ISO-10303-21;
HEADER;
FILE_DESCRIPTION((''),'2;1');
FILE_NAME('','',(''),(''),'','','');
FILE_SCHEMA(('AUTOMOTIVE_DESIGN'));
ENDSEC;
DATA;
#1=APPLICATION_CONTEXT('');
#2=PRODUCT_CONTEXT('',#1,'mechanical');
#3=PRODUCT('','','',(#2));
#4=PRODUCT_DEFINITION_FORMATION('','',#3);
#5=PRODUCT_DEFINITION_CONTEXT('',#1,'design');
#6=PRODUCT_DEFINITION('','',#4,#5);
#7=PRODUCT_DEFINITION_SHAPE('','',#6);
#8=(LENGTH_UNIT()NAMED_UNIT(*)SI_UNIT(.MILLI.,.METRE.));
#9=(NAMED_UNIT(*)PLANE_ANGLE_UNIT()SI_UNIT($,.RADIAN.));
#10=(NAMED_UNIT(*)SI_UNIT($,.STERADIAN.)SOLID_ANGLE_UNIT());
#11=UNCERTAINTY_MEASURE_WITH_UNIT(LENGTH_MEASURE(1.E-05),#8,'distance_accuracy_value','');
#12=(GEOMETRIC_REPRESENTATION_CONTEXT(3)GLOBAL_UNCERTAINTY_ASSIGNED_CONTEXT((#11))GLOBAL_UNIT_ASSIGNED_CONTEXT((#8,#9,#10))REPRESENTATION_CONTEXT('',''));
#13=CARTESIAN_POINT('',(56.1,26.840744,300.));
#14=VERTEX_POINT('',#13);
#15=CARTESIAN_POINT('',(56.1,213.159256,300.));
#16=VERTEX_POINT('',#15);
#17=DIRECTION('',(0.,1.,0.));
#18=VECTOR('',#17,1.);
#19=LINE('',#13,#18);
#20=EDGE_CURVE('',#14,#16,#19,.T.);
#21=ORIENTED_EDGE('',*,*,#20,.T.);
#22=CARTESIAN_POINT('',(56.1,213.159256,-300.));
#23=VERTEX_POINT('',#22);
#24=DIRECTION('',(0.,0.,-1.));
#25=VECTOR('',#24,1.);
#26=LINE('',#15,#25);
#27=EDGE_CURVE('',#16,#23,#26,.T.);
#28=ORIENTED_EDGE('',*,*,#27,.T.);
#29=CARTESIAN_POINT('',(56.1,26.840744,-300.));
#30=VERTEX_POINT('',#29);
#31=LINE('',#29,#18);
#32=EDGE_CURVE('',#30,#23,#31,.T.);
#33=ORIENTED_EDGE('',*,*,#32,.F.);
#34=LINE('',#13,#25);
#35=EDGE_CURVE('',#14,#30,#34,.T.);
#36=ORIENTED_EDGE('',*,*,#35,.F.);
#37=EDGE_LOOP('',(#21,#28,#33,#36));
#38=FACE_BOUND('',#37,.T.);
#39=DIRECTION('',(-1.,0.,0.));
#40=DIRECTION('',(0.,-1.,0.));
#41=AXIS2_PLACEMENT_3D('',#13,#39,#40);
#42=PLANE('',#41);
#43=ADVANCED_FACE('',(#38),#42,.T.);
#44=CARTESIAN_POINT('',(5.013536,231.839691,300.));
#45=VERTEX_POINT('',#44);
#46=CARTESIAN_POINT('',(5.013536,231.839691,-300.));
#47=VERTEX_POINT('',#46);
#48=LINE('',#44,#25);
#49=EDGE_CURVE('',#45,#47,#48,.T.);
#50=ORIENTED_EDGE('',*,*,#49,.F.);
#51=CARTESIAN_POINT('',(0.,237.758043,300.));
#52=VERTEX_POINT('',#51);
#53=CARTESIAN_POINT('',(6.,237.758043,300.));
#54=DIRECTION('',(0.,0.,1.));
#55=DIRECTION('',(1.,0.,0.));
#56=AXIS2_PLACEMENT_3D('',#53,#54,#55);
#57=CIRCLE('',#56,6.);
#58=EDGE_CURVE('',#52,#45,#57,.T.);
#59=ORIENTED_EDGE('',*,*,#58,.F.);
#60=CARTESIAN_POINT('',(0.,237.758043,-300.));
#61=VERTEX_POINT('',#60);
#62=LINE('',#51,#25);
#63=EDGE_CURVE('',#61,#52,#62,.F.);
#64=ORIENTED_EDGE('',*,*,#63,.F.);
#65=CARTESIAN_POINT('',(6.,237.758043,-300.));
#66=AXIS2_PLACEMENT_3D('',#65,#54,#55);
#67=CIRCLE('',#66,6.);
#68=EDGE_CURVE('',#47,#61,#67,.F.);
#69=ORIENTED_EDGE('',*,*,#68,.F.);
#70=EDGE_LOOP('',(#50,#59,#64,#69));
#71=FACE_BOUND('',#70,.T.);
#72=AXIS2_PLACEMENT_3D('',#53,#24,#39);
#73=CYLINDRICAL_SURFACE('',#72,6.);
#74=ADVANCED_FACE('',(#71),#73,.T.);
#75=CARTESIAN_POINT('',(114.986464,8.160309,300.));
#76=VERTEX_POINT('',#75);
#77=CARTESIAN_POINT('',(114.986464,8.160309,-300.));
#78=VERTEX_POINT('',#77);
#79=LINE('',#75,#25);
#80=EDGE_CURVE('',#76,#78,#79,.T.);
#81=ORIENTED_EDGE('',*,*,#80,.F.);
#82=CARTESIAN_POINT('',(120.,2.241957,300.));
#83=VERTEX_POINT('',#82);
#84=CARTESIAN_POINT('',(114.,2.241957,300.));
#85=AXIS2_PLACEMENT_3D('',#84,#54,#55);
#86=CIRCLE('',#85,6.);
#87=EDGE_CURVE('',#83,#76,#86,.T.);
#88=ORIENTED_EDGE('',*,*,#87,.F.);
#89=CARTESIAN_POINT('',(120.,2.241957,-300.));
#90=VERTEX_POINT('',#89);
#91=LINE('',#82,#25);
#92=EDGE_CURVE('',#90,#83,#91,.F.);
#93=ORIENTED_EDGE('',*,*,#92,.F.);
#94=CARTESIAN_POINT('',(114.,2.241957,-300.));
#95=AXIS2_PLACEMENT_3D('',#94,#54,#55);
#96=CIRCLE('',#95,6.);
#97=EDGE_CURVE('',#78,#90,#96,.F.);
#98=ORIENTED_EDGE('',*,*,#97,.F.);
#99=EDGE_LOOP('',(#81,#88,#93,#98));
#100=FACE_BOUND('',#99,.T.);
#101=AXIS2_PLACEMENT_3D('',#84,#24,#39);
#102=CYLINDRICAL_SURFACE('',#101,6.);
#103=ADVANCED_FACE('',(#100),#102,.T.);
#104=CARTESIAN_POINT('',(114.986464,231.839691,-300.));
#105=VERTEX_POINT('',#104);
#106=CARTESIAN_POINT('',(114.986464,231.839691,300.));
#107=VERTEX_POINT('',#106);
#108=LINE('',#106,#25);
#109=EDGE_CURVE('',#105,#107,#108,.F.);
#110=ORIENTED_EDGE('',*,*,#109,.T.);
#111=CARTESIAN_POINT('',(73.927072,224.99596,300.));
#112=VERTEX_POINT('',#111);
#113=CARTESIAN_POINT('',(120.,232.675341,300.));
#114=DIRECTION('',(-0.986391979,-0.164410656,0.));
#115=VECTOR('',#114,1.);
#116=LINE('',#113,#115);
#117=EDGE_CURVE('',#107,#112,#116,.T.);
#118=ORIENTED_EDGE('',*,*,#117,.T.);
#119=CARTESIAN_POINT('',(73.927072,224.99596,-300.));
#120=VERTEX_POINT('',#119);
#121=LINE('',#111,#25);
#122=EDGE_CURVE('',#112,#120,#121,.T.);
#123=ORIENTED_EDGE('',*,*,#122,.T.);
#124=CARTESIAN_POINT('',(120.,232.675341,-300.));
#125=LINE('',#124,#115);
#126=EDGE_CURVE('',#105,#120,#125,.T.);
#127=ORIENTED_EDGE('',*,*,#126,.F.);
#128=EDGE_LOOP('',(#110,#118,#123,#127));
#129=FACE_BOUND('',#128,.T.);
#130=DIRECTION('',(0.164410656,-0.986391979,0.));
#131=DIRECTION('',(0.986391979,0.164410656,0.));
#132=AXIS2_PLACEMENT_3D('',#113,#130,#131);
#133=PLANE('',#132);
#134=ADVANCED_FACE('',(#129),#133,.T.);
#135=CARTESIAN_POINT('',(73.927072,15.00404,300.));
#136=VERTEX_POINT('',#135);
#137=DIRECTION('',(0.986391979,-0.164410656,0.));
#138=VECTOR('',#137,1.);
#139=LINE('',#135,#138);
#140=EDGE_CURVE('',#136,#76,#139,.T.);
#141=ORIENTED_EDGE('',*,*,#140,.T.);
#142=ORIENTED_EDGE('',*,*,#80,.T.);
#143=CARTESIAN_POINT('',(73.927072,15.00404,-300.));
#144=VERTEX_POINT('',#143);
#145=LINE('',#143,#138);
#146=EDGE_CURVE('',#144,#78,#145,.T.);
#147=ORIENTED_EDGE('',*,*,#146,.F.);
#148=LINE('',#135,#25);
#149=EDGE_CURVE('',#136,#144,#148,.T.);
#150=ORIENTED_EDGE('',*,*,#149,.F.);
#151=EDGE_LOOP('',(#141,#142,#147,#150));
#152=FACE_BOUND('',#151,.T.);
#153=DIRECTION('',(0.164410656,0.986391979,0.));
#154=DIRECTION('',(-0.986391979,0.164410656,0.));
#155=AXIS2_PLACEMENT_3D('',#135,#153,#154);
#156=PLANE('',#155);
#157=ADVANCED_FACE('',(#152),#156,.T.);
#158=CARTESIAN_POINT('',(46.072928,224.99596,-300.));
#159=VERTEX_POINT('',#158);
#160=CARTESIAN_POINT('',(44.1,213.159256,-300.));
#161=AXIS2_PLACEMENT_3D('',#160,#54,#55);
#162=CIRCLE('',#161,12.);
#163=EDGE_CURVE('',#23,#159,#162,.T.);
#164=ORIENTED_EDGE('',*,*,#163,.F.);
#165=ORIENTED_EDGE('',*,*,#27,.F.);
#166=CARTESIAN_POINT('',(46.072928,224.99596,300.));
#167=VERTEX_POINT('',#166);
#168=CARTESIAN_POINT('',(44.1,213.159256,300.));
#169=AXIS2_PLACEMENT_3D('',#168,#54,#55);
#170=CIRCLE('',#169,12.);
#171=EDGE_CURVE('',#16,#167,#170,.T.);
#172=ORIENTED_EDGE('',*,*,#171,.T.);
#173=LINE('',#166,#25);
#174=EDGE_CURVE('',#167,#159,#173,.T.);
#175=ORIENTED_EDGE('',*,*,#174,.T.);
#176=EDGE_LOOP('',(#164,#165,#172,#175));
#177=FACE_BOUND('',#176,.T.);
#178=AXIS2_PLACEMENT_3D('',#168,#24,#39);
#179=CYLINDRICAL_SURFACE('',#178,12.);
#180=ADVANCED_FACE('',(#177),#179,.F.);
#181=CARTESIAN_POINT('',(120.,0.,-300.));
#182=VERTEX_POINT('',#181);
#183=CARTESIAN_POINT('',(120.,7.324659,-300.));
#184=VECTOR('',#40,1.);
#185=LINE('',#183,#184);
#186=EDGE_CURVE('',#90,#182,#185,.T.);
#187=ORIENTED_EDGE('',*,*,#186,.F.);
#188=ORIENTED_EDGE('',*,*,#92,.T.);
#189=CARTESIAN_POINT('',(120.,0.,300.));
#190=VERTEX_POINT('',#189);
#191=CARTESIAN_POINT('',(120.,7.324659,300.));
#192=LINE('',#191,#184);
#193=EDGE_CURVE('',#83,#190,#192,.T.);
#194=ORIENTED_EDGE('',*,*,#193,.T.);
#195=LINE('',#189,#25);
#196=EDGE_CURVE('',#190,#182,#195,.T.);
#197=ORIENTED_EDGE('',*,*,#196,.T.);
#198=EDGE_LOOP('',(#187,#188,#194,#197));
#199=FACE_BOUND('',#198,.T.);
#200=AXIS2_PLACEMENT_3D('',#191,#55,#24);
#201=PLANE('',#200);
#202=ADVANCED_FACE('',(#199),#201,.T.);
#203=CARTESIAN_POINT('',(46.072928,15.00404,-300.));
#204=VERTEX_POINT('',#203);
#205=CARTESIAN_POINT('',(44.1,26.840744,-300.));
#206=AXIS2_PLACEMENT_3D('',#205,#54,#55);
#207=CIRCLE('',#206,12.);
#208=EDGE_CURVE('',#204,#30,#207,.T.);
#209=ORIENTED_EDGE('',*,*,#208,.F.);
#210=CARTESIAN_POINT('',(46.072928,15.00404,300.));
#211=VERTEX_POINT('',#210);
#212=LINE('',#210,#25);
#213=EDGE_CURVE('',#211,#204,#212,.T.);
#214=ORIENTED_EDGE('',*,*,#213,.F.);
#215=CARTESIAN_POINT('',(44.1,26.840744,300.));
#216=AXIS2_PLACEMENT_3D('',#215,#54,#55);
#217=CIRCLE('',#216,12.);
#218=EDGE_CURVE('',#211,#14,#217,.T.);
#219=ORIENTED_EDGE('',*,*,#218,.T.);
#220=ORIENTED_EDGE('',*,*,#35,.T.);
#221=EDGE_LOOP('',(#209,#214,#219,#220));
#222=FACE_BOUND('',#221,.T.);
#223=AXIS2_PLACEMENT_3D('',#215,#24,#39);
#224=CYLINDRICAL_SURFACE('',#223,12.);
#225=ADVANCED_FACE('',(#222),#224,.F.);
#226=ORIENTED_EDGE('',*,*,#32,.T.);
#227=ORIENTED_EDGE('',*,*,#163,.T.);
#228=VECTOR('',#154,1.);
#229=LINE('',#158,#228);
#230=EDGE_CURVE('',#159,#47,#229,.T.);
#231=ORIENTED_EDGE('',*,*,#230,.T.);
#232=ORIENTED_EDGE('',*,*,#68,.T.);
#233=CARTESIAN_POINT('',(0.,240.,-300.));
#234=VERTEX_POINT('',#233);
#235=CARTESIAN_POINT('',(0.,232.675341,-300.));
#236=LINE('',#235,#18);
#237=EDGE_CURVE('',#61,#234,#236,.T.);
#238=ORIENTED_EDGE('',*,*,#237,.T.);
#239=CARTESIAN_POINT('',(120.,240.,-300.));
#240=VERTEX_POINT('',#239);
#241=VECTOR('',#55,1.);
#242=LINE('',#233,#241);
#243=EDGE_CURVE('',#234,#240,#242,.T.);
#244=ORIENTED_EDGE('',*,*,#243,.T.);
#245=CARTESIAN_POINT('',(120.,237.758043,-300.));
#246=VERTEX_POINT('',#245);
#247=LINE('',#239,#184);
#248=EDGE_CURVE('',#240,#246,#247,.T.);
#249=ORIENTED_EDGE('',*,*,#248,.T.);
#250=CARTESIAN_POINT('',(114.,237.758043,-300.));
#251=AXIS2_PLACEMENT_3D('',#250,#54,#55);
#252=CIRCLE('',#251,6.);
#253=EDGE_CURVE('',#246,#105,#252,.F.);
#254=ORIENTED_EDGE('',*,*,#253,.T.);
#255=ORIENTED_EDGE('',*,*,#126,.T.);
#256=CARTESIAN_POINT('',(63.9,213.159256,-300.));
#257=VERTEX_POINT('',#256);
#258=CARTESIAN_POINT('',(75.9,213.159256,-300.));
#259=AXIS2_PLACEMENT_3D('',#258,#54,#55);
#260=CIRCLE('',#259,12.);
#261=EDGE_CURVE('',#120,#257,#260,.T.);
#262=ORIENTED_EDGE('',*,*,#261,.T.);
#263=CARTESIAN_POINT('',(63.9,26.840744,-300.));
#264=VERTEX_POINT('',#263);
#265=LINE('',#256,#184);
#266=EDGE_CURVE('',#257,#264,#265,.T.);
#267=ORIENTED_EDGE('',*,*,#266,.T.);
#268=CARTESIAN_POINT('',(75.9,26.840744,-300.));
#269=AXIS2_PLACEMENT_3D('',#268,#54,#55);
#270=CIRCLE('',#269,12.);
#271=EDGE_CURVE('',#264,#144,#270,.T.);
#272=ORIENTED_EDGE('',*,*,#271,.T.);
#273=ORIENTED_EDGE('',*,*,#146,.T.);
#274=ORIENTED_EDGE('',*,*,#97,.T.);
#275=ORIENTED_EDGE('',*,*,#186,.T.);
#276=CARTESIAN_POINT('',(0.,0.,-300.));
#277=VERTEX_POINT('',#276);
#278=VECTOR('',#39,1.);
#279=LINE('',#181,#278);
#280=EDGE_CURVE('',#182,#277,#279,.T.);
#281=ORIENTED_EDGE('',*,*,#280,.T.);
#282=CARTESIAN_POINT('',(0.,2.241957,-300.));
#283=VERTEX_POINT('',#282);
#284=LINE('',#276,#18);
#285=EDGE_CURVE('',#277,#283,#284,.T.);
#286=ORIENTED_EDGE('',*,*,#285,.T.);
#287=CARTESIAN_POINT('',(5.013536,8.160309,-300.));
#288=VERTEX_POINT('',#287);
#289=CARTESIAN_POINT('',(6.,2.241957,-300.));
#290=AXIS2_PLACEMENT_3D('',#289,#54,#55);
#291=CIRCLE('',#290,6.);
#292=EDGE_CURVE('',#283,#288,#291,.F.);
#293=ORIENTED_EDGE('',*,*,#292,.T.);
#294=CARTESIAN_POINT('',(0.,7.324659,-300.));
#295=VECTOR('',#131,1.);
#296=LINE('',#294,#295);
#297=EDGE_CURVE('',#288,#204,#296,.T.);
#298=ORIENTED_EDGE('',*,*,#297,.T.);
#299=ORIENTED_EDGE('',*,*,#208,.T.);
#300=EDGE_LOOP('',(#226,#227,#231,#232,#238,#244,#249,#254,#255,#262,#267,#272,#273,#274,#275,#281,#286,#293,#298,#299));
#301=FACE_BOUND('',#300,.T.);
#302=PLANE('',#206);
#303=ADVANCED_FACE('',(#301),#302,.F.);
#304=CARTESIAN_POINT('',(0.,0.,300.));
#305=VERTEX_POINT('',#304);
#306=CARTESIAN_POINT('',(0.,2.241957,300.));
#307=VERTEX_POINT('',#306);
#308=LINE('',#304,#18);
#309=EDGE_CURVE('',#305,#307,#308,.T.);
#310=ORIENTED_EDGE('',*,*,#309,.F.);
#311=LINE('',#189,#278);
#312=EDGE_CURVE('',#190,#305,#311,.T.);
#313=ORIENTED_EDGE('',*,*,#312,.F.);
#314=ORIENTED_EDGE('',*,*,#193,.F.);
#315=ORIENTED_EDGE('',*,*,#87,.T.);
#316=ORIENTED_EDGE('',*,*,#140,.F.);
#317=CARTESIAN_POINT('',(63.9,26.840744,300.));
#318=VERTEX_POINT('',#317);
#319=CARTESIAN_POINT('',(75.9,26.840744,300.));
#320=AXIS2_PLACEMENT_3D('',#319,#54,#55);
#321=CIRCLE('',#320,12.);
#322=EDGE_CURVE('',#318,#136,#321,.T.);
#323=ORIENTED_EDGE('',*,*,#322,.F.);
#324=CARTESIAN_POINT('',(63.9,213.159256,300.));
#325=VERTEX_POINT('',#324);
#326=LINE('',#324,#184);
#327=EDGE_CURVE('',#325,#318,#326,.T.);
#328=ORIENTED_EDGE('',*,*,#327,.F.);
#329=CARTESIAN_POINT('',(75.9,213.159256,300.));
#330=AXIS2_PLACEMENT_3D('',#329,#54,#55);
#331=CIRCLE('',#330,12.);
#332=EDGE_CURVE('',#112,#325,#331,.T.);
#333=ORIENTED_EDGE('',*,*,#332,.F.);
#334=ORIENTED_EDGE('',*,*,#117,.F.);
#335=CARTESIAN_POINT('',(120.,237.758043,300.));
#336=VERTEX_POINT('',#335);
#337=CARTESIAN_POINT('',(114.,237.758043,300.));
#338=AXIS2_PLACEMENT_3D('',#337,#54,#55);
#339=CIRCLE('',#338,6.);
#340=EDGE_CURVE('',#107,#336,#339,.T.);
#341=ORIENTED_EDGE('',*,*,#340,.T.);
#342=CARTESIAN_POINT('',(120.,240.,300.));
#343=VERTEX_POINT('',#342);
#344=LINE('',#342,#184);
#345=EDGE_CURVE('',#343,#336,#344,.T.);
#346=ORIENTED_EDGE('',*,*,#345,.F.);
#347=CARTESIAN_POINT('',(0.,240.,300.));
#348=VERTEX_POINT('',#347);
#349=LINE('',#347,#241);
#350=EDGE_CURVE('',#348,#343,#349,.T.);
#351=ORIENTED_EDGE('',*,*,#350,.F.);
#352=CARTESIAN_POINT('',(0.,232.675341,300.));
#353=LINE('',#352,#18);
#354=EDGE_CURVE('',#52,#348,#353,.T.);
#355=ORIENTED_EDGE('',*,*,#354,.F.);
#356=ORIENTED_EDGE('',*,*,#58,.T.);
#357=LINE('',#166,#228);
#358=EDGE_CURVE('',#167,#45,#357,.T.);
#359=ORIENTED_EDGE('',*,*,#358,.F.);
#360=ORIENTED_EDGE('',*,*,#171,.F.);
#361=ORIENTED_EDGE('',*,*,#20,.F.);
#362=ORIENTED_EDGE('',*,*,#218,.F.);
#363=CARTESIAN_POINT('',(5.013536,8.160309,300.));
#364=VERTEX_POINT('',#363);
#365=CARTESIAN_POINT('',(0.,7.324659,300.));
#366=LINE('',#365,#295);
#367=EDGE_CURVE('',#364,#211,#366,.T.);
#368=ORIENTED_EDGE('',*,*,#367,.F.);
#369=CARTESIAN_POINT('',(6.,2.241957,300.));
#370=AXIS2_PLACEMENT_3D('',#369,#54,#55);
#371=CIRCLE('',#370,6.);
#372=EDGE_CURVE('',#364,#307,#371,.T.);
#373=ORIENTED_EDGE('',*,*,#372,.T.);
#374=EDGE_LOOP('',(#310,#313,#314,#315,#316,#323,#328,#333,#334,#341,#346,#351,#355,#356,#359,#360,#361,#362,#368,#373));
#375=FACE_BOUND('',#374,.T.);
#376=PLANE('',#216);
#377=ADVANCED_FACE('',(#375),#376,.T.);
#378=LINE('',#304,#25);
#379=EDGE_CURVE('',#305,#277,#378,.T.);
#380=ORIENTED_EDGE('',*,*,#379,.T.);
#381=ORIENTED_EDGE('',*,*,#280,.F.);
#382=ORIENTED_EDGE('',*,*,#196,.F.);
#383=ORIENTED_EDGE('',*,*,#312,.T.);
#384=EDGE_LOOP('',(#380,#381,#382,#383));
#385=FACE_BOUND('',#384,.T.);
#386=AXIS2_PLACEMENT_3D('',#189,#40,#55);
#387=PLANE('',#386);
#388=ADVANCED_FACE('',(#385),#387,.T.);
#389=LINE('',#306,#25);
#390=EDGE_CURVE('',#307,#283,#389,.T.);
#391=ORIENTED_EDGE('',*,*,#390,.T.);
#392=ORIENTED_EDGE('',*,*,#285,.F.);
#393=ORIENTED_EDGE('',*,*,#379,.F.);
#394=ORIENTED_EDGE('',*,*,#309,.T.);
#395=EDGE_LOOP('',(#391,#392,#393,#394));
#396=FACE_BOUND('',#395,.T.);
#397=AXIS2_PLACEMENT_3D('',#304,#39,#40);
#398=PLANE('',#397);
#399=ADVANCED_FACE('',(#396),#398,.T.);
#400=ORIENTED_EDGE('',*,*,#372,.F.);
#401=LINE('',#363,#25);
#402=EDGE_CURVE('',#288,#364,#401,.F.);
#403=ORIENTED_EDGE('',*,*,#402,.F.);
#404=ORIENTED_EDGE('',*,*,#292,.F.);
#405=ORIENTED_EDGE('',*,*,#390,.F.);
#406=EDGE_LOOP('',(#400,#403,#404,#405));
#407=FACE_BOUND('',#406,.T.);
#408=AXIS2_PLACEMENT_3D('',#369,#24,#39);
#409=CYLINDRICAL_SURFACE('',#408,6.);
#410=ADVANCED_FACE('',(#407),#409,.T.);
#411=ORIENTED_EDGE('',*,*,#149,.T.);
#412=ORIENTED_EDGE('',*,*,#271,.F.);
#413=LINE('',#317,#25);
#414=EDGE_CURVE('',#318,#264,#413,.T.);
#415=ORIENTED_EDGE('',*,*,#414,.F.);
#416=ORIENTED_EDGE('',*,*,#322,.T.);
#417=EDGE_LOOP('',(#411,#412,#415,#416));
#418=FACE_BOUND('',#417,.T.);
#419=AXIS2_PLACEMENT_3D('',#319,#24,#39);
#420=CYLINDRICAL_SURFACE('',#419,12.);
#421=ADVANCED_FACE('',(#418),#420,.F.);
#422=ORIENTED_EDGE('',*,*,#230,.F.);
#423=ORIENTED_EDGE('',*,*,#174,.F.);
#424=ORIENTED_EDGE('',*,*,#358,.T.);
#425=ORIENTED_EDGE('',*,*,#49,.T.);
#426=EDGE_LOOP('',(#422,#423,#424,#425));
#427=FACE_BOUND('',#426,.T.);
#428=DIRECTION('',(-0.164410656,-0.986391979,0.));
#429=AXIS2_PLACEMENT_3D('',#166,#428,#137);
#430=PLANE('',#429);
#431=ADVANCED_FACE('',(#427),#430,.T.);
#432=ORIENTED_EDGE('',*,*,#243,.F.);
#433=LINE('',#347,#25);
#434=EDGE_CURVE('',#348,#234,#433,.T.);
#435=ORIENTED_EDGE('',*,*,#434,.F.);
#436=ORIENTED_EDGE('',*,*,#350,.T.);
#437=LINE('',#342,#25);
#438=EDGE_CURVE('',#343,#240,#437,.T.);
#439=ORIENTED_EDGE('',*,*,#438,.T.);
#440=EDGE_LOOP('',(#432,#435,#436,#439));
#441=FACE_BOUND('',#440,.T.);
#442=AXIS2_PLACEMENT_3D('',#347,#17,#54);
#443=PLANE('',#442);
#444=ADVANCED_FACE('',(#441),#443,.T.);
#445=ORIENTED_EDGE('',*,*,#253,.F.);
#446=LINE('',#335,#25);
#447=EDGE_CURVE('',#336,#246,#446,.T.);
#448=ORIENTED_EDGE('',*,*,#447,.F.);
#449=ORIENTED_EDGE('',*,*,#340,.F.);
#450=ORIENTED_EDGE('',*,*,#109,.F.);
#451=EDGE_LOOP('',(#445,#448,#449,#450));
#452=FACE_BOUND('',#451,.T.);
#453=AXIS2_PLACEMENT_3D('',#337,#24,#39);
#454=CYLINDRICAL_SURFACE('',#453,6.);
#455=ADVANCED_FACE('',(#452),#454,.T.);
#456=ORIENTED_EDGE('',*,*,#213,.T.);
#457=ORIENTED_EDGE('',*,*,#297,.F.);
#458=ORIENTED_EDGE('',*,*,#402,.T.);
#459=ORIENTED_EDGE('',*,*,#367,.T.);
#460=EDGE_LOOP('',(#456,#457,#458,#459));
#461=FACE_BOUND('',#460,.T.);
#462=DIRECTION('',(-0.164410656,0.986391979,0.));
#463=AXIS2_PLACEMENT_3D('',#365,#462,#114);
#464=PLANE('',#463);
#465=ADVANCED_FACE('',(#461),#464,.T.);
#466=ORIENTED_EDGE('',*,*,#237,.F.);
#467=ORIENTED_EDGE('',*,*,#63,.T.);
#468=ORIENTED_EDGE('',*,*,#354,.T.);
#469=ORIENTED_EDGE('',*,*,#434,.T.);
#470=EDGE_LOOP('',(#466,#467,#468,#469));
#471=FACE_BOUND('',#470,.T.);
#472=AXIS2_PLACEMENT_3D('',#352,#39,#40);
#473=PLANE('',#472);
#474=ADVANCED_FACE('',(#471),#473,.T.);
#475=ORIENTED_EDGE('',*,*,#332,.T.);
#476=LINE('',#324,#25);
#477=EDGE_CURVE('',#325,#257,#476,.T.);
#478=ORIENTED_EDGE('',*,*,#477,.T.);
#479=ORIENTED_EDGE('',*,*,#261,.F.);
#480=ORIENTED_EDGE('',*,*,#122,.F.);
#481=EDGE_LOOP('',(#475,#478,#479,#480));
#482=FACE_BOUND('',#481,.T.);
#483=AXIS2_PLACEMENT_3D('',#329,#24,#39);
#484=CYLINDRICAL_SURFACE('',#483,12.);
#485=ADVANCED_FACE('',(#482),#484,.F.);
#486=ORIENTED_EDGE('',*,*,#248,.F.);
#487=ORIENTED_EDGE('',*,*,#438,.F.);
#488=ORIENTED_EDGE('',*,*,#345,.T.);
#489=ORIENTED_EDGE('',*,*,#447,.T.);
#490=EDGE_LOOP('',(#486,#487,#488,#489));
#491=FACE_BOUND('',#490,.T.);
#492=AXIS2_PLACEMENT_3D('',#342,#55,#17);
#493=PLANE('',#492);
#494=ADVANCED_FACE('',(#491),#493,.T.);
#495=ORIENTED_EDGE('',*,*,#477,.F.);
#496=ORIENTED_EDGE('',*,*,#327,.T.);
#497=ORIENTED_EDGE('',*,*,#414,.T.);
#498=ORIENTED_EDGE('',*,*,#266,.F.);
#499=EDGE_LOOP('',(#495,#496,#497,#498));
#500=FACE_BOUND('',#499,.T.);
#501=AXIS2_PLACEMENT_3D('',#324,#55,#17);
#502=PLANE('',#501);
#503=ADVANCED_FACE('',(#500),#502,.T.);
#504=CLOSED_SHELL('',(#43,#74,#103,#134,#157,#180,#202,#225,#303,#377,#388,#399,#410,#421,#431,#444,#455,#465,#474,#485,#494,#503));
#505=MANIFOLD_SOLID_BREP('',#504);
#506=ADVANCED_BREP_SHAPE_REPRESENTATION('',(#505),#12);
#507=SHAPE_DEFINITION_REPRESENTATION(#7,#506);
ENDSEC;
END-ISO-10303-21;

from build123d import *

# Parameters (mm, degrees)
BASESBEAM_START = -300
BASESBEAM_DEPTH = 600
TOEFILLET_R     = 6


# Read off the part's stored shape, not the designer's step: BaseSbeam
with BuildPart() as part:
    # BaseSbeam outline → BaseSbeam (new body)
    with BuildSketch(Plane.XY.offset(BASESBEAM_START)):
        with BuildLine():
            Line((0, 7.324658955), (0, 0))
            Line((0, 0), (120, 0))
            Line((120, 0), (120, 7.324658955))
            Line((120, 7.324658955), (73.927072128, 15.004040437))
            ThreePointArc((73.927072128, 15.004040437), (66.743714332, 19.084299589), (63.9, 26.840744185))
            Line((63.9, 26.840744185), (63.9, 213.159255815))
            ThreePointArc((63.9, 213.159255815), (66.743714332, 220.915700411), (73.927072128, 224.995959563))
            Line((73.927072128, 224.995959563), (120, 232.675341045))
            Line((120, 232.675341045), (120, 240))
            Line((120, 240), (0, 240))
            Line((0, 240), (0, 232.675341045))
            Line((0, 232.675341045), (46.072927872, 224.995959563))
            ThreePointArc((46.072927872, 224.995959563), (53.256285668, 220.915700411), (56.1, 213.159255815))
            Line((56.1, 213.159255815), (56.1, 26.840744185))
            ThreePointArc((56.1, 26.840744185), (53.256285668, 19.084299589), (46.072927872, 15.004040437))
            Line((46.072927872, 15.004040437), (0, 7.324658955))
        make_face()
    extrude(amount=BASESBEAM_DEPTH)

    # ToeFillet
    toefillet_edges = [part.edges().sort_by_distance(p)[0] for p in [
        (120, 7.324658955, 0),
        (120, 232.675341045, 0),
        (0, 232.675341045, 0),
        (0, 7.324658955, 0),
    ]]
    fillet(toefillet_edges, radius=TOEFILLET_R)


solid = part.part
